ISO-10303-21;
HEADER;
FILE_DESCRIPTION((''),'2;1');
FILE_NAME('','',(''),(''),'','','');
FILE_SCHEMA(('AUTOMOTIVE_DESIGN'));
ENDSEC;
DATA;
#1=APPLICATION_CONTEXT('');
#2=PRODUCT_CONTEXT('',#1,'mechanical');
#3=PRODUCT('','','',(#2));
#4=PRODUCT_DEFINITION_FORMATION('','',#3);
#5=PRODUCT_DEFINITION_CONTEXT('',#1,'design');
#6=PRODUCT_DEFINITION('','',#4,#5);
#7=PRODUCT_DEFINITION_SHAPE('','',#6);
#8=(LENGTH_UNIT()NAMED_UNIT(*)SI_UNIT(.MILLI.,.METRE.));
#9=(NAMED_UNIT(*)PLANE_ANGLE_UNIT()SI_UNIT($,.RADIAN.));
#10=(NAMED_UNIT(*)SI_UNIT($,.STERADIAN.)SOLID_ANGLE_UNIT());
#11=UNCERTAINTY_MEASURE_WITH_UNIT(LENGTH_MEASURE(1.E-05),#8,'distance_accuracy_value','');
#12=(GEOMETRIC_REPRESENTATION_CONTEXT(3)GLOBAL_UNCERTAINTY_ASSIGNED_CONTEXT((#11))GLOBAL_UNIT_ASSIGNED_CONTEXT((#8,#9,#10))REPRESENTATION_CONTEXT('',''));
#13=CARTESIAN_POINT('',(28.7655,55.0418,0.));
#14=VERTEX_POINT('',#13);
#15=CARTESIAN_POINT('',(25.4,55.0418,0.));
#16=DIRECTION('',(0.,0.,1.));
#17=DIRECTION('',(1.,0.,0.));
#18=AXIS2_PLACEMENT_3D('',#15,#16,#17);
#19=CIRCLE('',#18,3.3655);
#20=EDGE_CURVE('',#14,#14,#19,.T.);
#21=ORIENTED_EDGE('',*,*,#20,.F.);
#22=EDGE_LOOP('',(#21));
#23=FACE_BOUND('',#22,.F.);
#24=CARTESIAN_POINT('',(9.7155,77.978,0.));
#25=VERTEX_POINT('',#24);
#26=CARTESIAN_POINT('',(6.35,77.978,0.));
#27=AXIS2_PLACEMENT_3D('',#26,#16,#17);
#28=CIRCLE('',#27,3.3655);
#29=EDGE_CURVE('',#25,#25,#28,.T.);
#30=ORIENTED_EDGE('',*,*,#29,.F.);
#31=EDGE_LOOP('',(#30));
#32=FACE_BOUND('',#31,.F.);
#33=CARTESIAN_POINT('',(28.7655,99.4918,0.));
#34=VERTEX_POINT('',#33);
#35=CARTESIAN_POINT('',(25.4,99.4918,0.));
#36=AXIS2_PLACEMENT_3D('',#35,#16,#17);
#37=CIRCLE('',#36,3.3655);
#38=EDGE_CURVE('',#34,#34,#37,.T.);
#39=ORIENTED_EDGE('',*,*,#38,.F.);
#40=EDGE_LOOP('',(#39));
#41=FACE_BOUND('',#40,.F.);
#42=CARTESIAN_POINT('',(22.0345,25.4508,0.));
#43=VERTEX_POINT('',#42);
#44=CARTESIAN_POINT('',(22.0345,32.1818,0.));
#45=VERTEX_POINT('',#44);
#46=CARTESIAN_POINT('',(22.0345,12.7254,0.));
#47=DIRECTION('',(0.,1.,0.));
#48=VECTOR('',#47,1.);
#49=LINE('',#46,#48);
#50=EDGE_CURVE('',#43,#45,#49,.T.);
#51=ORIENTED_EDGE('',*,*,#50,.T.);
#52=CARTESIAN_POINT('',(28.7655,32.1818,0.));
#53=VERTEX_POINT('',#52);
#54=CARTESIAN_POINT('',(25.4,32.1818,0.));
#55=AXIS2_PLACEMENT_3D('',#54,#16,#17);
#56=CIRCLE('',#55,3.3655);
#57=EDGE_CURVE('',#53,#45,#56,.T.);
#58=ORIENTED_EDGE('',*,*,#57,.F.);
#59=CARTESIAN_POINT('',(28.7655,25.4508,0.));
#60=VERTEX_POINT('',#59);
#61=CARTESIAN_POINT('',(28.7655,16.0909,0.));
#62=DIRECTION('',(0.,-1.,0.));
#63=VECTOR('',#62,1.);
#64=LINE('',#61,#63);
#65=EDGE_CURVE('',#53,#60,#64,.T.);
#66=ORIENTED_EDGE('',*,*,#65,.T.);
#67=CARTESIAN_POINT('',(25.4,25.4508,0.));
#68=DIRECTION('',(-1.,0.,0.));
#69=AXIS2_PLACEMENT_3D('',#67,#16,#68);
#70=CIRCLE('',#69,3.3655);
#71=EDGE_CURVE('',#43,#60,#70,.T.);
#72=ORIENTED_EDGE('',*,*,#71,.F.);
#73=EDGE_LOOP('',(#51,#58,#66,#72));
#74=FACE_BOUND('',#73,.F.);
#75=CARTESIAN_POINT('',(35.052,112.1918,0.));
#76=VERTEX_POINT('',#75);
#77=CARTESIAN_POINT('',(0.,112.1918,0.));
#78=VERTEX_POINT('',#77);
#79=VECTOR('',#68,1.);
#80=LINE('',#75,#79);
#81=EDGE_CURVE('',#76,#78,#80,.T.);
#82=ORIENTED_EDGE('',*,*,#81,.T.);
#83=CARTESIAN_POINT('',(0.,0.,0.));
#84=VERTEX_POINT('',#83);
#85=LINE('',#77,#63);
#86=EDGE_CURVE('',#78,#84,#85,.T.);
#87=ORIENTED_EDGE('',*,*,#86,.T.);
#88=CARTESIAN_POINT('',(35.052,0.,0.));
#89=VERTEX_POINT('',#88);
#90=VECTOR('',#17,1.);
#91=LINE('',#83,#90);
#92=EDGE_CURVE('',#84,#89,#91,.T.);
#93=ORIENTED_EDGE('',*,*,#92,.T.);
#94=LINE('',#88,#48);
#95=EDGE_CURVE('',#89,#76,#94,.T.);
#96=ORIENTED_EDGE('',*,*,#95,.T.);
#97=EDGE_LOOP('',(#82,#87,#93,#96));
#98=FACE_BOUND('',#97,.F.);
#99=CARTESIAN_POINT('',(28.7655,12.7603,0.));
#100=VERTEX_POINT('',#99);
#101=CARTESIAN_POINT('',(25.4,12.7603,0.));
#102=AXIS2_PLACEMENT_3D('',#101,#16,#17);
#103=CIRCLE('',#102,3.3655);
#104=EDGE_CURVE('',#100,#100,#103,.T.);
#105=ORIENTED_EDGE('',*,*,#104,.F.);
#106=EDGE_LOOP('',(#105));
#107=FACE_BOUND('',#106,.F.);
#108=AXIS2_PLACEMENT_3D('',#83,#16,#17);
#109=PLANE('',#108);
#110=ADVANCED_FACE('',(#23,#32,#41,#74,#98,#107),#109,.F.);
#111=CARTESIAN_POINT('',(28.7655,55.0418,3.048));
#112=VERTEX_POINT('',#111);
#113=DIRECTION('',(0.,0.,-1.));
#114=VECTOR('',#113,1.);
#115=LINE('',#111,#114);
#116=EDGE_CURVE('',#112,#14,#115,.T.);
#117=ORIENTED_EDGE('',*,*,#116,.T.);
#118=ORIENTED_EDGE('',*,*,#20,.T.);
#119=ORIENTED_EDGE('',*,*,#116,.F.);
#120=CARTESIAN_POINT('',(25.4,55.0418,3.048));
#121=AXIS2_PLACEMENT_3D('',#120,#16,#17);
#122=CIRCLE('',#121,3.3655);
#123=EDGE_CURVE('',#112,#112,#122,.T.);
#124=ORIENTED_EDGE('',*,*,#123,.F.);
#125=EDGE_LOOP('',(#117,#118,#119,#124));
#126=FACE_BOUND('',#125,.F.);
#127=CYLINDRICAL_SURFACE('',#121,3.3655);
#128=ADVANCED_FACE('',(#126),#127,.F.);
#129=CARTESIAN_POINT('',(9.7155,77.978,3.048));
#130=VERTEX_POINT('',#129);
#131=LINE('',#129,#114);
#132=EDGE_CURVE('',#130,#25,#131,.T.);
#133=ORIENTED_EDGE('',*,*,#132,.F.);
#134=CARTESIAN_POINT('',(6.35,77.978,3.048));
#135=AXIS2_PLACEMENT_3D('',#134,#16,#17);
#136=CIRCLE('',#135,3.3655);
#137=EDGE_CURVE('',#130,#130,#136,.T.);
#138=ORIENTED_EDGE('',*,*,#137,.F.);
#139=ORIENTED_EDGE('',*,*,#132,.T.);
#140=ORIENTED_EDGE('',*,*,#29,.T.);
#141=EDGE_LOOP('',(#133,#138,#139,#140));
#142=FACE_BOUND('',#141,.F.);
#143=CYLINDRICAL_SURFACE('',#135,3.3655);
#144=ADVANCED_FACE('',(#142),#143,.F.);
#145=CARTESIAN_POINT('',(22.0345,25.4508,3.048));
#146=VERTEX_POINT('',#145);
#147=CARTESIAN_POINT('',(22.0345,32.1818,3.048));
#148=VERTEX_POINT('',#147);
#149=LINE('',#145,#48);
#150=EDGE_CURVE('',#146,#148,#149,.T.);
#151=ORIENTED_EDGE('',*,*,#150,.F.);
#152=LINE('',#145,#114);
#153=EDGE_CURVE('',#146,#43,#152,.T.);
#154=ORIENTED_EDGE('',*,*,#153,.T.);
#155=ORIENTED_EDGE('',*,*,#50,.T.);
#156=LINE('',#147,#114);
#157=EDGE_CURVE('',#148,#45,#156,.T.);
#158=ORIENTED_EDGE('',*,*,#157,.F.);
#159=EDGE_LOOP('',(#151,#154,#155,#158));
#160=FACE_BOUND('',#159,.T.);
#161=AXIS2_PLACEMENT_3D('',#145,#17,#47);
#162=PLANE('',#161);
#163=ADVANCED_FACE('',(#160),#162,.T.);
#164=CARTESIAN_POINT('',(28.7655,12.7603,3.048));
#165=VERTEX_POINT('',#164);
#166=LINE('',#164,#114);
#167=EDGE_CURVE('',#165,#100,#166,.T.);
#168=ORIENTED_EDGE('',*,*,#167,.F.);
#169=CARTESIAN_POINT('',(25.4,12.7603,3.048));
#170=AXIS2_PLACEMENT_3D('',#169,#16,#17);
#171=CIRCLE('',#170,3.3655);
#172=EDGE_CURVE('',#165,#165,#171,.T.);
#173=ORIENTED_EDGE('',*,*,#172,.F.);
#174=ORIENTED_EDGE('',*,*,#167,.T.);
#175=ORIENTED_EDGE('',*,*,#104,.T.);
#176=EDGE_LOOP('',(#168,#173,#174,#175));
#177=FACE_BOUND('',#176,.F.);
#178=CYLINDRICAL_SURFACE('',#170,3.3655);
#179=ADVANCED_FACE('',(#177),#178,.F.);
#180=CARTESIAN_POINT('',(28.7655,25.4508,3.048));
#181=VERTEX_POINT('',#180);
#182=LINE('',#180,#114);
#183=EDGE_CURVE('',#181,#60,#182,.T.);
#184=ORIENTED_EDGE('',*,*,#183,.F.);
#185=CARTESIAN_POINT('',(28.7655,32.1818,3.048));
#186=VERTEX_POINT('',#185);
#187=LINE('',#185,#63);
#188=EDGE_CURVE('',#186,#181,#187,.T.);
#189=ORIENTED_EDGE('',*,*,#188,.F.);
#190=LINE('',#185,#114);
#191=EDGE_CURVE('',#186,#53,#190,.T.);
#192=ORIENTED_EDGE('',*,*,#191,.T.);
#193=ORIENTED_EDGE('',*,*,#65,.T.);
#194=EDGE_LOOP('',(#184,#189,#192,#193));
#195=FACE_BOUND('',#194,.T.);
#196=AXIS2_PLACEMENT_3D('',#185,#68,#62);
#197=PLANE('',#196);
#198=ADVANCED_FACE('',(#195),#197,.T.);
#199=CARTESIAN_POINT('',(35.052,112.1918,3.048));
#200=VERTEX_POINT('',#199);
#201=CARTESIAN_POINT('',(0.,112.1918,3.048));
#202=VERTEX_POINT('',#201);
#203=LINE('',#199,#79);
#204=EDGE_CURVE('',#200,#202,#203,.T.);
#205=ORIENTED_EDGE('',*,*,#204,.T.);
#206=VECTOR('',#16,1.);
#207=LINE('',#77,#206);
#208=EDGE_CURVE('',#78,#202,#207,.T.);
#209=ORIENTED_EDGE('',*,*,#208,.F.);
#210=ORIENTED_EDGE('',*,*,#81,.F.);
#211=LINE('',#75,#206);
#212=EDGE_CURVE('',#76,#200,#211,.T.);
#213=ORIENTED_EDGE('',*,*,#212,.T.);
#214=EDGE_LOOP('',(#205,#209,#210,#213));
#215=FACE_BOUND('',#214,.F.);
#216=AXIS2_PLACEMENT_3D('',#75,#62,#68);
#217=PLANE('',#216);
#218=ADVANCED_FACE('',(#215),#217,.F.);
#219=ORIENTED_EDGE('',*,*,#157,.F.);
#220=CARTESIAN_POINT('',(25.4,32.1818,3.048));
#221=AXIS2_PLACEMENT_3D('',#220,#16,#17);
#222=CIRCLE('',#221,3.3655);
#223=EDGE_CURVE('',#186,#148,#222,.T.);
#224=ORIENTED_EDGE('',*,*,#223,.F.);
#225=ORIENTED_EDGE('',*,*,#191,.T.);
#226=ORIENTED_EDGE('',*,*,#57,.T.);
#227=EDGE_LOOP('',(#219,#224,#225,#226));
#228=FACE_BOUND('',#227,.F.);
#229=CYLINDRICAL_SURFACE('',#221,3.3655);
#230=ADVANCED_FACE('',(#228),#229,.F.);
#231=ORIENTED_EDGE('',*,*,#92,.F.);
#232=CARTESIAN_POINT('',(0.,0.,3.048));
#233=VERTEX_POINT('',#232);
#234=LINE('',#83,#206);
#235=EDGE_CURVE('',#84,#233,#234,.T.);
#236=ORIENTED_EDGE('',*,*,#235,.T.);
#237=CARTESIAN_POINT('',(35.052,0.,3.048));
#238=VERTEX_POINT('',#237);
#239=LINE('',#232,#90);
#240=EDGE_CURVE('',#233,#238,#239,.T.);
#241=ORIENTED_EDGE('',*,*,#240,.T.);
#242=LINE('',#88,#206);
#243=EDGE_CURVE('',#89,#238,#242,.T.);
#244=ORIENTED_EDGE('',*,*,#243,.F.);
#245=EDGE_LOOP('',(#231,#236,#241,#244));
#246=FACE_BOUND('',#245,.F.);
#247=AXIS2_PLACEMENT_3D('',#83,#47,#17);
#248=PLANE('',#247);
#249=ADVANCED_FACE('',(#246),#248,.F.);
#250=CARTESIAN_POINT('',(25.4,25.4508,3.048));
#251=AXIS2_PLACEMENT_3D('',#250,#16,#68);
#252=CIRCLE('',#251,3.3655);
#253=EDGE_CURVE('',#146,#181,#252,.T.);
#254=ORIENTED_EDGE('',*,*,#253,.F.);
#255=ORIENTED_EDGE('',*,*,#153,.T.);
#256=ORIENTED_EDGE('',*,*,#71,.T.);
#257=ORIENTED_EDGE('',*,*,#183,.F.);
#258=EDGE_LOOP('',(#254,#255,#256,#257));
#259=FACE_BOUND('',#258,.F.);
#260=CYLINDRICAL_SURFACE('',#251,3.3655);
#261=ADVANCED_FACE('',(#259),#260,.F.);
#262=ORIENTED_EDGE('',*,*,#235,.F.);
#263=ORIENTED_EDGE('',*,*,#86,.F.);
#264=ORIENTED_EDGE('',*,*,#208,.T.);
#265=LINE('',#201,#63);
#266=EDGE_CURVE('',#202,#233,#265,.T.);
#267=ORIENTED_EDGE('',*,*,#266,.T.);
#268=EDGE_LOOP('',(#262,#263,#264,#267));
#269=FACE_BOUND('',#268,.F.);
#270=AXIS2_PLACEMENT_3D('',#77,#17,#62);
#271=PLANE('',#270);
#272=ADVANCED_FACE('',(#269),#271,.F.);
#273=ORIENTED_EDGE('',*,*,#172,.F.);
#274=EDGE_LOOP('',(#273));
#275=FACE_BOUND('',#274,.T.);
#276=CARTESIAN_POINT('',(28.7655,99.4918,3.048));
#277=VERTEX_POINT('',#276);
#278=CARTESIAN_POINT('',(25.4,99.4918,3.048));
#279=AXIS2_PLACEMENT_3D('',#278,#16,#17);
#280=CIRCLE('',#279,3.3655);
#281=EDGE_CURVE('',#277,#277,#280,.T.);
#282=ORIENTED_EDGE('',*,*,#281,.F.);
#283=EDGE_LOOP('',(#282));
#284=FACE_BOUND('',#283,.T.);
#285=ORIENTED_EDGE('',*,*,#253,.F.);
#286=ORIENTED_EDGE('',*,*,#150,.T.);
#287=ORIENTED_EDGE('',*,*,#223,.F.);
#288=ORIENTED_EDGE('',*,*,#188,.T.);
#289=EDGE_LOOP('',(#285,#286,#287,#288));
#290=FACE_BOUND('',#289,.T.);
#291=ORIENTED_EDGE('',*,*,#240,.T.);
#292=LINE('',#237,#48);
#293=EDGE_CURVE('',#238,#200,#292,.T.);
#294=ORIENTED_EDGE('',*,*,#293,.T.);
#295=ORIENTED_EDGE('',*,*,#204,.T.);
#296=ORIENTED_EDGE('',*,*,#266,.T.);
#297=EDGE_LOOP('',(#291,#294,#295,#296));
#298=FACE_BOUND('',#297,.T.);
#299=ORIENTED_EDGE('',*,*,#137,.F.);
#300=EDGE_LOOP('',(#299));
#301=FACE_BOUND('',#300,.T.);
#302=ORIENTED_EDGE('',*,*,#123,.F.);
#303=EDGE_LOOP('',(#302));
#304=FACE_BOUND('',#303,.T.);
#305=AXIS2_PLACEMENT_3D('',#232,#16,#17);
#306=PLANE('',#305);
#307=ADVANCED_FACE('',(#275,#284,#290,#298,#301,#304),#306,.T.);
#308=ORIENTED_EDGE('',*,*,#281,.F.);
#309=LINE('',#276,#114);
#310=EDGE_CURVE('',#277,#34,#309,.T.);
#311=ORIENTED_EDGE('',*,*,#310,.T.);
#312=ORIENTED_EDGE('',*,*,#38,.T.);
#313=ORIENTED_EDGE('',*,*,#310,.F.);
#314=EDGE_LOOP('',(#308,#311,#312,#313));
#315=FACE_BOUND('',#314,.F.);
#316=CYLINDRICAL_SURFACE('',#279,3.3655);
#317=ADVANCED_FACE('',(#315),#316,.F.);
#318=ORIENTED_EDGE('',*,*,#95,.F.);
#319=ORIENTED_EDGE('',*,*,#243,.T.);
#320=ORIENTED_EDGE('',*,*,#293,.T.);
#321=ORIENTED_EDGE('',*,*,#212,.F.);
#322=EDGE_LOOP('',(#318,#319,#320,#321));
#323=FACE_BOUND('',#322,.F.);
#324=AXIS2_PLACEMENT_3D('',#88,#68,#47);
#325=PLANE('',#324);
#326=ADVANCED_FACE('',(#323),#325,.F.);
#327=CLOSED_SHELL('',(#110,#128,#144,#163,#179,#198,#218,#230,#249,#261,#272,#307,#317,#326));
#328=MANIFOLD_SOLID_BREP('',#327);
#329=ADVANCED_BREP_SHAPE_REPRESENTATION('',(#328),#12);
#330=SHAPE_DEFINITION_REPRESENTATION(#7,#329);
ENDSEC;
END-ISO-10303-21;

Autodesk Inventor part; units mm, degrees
ref_plane "YZ Plane" through (0, 0, 0) normal (1, 0, 0) x (0, 1, 0)
ref_plane "XZ Plane" through (0, 0, 0) normal (0, 1, 0) x (-1, 0, 0)
ref_plane "XY Plane" through (0, 0, 0) normal (0, 0, 1) x (1, 0, 0)
sketch "Sketch1" plane through (0, 0, 0) normal (0, 0, 1) x (1, 0, 0)
  line L0 (0, 0) -> (35.052, 0)
  line L1 (35.052, 0) -> (35.052, 112.1918)
  line L2 (35.052, 112.1918) -> (0, 112.1918)
  line L3 (0, 112.1918) -> (0, 0)
  dimension "d0" = 35.052
  dimension "d1" = 112.1918
extrude "Plate1" add sketch "Sketch1" along normal blind 3.048
sketch "Sketch2" plane through (0, 0, 3.048) normal (0, 0, 1) x (1, 0, 0)
  circle A0 centre (25.4, 99.4918) radius 3.3655
  circle A1 centre (25.4, 12.7603) radius 3.3655
  circle A2 centre (25.4, 55.0418) radius 3.3655
  circle A3 centre (6.35, 77.978) radius 3.3655
  line L0 (0, 0) -> (0, 112.1918) projected
  line L1 (28.7655, 32.1818) -> (28.7655, 25.4508)
  line L2 (22.0345, 25.4508) -> (22.0345, 32.1818)
  arc A4 (28.7655, 32.1818) -> (22.0345, 32.1818) centre (25.4, 32.1818) ccw
  line L3 (22.0345, 32.1818) -> (22.0345, 32.1818)
  line L4 (28.7655, 32.1818) -> (28.7655, 32.1818)
  arc A5 (22.0345, 25.4508) -> (28.7655, 25.4508) centre (25.4, 25.4508) ccw
  line L5 (0, 112.1918) -> (35.052, 112.1918) projected
  line L6 (35.052, 112.1918) -> (35.052, 0) projected
  point P0 (25.786, 22.1075)
  dimension "hole" = 6.731
  dimension "d42" = 6.731
  dimension "d43" = 6.731
  dimension "d44" = 6.731
  dimension "d49" = 25.4
  dimension "d50" = 6.35
  dimension "d51" = 25.4
  dimension "d54" = 25.4
  dimension "d55" = 44.45
  dimension "d58" = 22.0345
  dimension "d62" = 6.731
  dimension "d63" = 22.86
  dimension "d64" = 12.6905
  dimension "d66" = 25.4
  dimension "d67" = 25.4
  dimension "d68" = 12.7
  dimension "d69" = 21.5138
  dimension "d70" = 3.3655
  dimension "d75" = 9.3472
  dimension "d78" = 6.731
  dimension "d80" = 180
  dimension "d81" = 6.731
extrude "Extrusion1" cut sketch "Sketch2" against normal blind 25.4
equation "\"d42\" = hole"
equation "\"d43\" = hole"
equation "\"d44\" = hole"
equation "\"d70\" = 0.5 * hole"
equation "\"BendRadius\" = Thickness"
equation "\"BendReliefWidth\" = Thickness"
equation "\"BendReliefDepth\" = 0.5 * Thickness"
equation "\"CornerReliefSize\" = 4 * Thickness"
equation "\"MinimumRemnant\" = 2 * Thickness"
equation "\"TransitionRadius\" = BendRadius"
equation "\"JacobiRadiusSize\" = BendRadius"
equation "\"GapSize\" = Thickness"
equation "\"d2\" = BendRadius"
equation "\"Thickness\" = 3.048"
properties part number "Clawplate"
